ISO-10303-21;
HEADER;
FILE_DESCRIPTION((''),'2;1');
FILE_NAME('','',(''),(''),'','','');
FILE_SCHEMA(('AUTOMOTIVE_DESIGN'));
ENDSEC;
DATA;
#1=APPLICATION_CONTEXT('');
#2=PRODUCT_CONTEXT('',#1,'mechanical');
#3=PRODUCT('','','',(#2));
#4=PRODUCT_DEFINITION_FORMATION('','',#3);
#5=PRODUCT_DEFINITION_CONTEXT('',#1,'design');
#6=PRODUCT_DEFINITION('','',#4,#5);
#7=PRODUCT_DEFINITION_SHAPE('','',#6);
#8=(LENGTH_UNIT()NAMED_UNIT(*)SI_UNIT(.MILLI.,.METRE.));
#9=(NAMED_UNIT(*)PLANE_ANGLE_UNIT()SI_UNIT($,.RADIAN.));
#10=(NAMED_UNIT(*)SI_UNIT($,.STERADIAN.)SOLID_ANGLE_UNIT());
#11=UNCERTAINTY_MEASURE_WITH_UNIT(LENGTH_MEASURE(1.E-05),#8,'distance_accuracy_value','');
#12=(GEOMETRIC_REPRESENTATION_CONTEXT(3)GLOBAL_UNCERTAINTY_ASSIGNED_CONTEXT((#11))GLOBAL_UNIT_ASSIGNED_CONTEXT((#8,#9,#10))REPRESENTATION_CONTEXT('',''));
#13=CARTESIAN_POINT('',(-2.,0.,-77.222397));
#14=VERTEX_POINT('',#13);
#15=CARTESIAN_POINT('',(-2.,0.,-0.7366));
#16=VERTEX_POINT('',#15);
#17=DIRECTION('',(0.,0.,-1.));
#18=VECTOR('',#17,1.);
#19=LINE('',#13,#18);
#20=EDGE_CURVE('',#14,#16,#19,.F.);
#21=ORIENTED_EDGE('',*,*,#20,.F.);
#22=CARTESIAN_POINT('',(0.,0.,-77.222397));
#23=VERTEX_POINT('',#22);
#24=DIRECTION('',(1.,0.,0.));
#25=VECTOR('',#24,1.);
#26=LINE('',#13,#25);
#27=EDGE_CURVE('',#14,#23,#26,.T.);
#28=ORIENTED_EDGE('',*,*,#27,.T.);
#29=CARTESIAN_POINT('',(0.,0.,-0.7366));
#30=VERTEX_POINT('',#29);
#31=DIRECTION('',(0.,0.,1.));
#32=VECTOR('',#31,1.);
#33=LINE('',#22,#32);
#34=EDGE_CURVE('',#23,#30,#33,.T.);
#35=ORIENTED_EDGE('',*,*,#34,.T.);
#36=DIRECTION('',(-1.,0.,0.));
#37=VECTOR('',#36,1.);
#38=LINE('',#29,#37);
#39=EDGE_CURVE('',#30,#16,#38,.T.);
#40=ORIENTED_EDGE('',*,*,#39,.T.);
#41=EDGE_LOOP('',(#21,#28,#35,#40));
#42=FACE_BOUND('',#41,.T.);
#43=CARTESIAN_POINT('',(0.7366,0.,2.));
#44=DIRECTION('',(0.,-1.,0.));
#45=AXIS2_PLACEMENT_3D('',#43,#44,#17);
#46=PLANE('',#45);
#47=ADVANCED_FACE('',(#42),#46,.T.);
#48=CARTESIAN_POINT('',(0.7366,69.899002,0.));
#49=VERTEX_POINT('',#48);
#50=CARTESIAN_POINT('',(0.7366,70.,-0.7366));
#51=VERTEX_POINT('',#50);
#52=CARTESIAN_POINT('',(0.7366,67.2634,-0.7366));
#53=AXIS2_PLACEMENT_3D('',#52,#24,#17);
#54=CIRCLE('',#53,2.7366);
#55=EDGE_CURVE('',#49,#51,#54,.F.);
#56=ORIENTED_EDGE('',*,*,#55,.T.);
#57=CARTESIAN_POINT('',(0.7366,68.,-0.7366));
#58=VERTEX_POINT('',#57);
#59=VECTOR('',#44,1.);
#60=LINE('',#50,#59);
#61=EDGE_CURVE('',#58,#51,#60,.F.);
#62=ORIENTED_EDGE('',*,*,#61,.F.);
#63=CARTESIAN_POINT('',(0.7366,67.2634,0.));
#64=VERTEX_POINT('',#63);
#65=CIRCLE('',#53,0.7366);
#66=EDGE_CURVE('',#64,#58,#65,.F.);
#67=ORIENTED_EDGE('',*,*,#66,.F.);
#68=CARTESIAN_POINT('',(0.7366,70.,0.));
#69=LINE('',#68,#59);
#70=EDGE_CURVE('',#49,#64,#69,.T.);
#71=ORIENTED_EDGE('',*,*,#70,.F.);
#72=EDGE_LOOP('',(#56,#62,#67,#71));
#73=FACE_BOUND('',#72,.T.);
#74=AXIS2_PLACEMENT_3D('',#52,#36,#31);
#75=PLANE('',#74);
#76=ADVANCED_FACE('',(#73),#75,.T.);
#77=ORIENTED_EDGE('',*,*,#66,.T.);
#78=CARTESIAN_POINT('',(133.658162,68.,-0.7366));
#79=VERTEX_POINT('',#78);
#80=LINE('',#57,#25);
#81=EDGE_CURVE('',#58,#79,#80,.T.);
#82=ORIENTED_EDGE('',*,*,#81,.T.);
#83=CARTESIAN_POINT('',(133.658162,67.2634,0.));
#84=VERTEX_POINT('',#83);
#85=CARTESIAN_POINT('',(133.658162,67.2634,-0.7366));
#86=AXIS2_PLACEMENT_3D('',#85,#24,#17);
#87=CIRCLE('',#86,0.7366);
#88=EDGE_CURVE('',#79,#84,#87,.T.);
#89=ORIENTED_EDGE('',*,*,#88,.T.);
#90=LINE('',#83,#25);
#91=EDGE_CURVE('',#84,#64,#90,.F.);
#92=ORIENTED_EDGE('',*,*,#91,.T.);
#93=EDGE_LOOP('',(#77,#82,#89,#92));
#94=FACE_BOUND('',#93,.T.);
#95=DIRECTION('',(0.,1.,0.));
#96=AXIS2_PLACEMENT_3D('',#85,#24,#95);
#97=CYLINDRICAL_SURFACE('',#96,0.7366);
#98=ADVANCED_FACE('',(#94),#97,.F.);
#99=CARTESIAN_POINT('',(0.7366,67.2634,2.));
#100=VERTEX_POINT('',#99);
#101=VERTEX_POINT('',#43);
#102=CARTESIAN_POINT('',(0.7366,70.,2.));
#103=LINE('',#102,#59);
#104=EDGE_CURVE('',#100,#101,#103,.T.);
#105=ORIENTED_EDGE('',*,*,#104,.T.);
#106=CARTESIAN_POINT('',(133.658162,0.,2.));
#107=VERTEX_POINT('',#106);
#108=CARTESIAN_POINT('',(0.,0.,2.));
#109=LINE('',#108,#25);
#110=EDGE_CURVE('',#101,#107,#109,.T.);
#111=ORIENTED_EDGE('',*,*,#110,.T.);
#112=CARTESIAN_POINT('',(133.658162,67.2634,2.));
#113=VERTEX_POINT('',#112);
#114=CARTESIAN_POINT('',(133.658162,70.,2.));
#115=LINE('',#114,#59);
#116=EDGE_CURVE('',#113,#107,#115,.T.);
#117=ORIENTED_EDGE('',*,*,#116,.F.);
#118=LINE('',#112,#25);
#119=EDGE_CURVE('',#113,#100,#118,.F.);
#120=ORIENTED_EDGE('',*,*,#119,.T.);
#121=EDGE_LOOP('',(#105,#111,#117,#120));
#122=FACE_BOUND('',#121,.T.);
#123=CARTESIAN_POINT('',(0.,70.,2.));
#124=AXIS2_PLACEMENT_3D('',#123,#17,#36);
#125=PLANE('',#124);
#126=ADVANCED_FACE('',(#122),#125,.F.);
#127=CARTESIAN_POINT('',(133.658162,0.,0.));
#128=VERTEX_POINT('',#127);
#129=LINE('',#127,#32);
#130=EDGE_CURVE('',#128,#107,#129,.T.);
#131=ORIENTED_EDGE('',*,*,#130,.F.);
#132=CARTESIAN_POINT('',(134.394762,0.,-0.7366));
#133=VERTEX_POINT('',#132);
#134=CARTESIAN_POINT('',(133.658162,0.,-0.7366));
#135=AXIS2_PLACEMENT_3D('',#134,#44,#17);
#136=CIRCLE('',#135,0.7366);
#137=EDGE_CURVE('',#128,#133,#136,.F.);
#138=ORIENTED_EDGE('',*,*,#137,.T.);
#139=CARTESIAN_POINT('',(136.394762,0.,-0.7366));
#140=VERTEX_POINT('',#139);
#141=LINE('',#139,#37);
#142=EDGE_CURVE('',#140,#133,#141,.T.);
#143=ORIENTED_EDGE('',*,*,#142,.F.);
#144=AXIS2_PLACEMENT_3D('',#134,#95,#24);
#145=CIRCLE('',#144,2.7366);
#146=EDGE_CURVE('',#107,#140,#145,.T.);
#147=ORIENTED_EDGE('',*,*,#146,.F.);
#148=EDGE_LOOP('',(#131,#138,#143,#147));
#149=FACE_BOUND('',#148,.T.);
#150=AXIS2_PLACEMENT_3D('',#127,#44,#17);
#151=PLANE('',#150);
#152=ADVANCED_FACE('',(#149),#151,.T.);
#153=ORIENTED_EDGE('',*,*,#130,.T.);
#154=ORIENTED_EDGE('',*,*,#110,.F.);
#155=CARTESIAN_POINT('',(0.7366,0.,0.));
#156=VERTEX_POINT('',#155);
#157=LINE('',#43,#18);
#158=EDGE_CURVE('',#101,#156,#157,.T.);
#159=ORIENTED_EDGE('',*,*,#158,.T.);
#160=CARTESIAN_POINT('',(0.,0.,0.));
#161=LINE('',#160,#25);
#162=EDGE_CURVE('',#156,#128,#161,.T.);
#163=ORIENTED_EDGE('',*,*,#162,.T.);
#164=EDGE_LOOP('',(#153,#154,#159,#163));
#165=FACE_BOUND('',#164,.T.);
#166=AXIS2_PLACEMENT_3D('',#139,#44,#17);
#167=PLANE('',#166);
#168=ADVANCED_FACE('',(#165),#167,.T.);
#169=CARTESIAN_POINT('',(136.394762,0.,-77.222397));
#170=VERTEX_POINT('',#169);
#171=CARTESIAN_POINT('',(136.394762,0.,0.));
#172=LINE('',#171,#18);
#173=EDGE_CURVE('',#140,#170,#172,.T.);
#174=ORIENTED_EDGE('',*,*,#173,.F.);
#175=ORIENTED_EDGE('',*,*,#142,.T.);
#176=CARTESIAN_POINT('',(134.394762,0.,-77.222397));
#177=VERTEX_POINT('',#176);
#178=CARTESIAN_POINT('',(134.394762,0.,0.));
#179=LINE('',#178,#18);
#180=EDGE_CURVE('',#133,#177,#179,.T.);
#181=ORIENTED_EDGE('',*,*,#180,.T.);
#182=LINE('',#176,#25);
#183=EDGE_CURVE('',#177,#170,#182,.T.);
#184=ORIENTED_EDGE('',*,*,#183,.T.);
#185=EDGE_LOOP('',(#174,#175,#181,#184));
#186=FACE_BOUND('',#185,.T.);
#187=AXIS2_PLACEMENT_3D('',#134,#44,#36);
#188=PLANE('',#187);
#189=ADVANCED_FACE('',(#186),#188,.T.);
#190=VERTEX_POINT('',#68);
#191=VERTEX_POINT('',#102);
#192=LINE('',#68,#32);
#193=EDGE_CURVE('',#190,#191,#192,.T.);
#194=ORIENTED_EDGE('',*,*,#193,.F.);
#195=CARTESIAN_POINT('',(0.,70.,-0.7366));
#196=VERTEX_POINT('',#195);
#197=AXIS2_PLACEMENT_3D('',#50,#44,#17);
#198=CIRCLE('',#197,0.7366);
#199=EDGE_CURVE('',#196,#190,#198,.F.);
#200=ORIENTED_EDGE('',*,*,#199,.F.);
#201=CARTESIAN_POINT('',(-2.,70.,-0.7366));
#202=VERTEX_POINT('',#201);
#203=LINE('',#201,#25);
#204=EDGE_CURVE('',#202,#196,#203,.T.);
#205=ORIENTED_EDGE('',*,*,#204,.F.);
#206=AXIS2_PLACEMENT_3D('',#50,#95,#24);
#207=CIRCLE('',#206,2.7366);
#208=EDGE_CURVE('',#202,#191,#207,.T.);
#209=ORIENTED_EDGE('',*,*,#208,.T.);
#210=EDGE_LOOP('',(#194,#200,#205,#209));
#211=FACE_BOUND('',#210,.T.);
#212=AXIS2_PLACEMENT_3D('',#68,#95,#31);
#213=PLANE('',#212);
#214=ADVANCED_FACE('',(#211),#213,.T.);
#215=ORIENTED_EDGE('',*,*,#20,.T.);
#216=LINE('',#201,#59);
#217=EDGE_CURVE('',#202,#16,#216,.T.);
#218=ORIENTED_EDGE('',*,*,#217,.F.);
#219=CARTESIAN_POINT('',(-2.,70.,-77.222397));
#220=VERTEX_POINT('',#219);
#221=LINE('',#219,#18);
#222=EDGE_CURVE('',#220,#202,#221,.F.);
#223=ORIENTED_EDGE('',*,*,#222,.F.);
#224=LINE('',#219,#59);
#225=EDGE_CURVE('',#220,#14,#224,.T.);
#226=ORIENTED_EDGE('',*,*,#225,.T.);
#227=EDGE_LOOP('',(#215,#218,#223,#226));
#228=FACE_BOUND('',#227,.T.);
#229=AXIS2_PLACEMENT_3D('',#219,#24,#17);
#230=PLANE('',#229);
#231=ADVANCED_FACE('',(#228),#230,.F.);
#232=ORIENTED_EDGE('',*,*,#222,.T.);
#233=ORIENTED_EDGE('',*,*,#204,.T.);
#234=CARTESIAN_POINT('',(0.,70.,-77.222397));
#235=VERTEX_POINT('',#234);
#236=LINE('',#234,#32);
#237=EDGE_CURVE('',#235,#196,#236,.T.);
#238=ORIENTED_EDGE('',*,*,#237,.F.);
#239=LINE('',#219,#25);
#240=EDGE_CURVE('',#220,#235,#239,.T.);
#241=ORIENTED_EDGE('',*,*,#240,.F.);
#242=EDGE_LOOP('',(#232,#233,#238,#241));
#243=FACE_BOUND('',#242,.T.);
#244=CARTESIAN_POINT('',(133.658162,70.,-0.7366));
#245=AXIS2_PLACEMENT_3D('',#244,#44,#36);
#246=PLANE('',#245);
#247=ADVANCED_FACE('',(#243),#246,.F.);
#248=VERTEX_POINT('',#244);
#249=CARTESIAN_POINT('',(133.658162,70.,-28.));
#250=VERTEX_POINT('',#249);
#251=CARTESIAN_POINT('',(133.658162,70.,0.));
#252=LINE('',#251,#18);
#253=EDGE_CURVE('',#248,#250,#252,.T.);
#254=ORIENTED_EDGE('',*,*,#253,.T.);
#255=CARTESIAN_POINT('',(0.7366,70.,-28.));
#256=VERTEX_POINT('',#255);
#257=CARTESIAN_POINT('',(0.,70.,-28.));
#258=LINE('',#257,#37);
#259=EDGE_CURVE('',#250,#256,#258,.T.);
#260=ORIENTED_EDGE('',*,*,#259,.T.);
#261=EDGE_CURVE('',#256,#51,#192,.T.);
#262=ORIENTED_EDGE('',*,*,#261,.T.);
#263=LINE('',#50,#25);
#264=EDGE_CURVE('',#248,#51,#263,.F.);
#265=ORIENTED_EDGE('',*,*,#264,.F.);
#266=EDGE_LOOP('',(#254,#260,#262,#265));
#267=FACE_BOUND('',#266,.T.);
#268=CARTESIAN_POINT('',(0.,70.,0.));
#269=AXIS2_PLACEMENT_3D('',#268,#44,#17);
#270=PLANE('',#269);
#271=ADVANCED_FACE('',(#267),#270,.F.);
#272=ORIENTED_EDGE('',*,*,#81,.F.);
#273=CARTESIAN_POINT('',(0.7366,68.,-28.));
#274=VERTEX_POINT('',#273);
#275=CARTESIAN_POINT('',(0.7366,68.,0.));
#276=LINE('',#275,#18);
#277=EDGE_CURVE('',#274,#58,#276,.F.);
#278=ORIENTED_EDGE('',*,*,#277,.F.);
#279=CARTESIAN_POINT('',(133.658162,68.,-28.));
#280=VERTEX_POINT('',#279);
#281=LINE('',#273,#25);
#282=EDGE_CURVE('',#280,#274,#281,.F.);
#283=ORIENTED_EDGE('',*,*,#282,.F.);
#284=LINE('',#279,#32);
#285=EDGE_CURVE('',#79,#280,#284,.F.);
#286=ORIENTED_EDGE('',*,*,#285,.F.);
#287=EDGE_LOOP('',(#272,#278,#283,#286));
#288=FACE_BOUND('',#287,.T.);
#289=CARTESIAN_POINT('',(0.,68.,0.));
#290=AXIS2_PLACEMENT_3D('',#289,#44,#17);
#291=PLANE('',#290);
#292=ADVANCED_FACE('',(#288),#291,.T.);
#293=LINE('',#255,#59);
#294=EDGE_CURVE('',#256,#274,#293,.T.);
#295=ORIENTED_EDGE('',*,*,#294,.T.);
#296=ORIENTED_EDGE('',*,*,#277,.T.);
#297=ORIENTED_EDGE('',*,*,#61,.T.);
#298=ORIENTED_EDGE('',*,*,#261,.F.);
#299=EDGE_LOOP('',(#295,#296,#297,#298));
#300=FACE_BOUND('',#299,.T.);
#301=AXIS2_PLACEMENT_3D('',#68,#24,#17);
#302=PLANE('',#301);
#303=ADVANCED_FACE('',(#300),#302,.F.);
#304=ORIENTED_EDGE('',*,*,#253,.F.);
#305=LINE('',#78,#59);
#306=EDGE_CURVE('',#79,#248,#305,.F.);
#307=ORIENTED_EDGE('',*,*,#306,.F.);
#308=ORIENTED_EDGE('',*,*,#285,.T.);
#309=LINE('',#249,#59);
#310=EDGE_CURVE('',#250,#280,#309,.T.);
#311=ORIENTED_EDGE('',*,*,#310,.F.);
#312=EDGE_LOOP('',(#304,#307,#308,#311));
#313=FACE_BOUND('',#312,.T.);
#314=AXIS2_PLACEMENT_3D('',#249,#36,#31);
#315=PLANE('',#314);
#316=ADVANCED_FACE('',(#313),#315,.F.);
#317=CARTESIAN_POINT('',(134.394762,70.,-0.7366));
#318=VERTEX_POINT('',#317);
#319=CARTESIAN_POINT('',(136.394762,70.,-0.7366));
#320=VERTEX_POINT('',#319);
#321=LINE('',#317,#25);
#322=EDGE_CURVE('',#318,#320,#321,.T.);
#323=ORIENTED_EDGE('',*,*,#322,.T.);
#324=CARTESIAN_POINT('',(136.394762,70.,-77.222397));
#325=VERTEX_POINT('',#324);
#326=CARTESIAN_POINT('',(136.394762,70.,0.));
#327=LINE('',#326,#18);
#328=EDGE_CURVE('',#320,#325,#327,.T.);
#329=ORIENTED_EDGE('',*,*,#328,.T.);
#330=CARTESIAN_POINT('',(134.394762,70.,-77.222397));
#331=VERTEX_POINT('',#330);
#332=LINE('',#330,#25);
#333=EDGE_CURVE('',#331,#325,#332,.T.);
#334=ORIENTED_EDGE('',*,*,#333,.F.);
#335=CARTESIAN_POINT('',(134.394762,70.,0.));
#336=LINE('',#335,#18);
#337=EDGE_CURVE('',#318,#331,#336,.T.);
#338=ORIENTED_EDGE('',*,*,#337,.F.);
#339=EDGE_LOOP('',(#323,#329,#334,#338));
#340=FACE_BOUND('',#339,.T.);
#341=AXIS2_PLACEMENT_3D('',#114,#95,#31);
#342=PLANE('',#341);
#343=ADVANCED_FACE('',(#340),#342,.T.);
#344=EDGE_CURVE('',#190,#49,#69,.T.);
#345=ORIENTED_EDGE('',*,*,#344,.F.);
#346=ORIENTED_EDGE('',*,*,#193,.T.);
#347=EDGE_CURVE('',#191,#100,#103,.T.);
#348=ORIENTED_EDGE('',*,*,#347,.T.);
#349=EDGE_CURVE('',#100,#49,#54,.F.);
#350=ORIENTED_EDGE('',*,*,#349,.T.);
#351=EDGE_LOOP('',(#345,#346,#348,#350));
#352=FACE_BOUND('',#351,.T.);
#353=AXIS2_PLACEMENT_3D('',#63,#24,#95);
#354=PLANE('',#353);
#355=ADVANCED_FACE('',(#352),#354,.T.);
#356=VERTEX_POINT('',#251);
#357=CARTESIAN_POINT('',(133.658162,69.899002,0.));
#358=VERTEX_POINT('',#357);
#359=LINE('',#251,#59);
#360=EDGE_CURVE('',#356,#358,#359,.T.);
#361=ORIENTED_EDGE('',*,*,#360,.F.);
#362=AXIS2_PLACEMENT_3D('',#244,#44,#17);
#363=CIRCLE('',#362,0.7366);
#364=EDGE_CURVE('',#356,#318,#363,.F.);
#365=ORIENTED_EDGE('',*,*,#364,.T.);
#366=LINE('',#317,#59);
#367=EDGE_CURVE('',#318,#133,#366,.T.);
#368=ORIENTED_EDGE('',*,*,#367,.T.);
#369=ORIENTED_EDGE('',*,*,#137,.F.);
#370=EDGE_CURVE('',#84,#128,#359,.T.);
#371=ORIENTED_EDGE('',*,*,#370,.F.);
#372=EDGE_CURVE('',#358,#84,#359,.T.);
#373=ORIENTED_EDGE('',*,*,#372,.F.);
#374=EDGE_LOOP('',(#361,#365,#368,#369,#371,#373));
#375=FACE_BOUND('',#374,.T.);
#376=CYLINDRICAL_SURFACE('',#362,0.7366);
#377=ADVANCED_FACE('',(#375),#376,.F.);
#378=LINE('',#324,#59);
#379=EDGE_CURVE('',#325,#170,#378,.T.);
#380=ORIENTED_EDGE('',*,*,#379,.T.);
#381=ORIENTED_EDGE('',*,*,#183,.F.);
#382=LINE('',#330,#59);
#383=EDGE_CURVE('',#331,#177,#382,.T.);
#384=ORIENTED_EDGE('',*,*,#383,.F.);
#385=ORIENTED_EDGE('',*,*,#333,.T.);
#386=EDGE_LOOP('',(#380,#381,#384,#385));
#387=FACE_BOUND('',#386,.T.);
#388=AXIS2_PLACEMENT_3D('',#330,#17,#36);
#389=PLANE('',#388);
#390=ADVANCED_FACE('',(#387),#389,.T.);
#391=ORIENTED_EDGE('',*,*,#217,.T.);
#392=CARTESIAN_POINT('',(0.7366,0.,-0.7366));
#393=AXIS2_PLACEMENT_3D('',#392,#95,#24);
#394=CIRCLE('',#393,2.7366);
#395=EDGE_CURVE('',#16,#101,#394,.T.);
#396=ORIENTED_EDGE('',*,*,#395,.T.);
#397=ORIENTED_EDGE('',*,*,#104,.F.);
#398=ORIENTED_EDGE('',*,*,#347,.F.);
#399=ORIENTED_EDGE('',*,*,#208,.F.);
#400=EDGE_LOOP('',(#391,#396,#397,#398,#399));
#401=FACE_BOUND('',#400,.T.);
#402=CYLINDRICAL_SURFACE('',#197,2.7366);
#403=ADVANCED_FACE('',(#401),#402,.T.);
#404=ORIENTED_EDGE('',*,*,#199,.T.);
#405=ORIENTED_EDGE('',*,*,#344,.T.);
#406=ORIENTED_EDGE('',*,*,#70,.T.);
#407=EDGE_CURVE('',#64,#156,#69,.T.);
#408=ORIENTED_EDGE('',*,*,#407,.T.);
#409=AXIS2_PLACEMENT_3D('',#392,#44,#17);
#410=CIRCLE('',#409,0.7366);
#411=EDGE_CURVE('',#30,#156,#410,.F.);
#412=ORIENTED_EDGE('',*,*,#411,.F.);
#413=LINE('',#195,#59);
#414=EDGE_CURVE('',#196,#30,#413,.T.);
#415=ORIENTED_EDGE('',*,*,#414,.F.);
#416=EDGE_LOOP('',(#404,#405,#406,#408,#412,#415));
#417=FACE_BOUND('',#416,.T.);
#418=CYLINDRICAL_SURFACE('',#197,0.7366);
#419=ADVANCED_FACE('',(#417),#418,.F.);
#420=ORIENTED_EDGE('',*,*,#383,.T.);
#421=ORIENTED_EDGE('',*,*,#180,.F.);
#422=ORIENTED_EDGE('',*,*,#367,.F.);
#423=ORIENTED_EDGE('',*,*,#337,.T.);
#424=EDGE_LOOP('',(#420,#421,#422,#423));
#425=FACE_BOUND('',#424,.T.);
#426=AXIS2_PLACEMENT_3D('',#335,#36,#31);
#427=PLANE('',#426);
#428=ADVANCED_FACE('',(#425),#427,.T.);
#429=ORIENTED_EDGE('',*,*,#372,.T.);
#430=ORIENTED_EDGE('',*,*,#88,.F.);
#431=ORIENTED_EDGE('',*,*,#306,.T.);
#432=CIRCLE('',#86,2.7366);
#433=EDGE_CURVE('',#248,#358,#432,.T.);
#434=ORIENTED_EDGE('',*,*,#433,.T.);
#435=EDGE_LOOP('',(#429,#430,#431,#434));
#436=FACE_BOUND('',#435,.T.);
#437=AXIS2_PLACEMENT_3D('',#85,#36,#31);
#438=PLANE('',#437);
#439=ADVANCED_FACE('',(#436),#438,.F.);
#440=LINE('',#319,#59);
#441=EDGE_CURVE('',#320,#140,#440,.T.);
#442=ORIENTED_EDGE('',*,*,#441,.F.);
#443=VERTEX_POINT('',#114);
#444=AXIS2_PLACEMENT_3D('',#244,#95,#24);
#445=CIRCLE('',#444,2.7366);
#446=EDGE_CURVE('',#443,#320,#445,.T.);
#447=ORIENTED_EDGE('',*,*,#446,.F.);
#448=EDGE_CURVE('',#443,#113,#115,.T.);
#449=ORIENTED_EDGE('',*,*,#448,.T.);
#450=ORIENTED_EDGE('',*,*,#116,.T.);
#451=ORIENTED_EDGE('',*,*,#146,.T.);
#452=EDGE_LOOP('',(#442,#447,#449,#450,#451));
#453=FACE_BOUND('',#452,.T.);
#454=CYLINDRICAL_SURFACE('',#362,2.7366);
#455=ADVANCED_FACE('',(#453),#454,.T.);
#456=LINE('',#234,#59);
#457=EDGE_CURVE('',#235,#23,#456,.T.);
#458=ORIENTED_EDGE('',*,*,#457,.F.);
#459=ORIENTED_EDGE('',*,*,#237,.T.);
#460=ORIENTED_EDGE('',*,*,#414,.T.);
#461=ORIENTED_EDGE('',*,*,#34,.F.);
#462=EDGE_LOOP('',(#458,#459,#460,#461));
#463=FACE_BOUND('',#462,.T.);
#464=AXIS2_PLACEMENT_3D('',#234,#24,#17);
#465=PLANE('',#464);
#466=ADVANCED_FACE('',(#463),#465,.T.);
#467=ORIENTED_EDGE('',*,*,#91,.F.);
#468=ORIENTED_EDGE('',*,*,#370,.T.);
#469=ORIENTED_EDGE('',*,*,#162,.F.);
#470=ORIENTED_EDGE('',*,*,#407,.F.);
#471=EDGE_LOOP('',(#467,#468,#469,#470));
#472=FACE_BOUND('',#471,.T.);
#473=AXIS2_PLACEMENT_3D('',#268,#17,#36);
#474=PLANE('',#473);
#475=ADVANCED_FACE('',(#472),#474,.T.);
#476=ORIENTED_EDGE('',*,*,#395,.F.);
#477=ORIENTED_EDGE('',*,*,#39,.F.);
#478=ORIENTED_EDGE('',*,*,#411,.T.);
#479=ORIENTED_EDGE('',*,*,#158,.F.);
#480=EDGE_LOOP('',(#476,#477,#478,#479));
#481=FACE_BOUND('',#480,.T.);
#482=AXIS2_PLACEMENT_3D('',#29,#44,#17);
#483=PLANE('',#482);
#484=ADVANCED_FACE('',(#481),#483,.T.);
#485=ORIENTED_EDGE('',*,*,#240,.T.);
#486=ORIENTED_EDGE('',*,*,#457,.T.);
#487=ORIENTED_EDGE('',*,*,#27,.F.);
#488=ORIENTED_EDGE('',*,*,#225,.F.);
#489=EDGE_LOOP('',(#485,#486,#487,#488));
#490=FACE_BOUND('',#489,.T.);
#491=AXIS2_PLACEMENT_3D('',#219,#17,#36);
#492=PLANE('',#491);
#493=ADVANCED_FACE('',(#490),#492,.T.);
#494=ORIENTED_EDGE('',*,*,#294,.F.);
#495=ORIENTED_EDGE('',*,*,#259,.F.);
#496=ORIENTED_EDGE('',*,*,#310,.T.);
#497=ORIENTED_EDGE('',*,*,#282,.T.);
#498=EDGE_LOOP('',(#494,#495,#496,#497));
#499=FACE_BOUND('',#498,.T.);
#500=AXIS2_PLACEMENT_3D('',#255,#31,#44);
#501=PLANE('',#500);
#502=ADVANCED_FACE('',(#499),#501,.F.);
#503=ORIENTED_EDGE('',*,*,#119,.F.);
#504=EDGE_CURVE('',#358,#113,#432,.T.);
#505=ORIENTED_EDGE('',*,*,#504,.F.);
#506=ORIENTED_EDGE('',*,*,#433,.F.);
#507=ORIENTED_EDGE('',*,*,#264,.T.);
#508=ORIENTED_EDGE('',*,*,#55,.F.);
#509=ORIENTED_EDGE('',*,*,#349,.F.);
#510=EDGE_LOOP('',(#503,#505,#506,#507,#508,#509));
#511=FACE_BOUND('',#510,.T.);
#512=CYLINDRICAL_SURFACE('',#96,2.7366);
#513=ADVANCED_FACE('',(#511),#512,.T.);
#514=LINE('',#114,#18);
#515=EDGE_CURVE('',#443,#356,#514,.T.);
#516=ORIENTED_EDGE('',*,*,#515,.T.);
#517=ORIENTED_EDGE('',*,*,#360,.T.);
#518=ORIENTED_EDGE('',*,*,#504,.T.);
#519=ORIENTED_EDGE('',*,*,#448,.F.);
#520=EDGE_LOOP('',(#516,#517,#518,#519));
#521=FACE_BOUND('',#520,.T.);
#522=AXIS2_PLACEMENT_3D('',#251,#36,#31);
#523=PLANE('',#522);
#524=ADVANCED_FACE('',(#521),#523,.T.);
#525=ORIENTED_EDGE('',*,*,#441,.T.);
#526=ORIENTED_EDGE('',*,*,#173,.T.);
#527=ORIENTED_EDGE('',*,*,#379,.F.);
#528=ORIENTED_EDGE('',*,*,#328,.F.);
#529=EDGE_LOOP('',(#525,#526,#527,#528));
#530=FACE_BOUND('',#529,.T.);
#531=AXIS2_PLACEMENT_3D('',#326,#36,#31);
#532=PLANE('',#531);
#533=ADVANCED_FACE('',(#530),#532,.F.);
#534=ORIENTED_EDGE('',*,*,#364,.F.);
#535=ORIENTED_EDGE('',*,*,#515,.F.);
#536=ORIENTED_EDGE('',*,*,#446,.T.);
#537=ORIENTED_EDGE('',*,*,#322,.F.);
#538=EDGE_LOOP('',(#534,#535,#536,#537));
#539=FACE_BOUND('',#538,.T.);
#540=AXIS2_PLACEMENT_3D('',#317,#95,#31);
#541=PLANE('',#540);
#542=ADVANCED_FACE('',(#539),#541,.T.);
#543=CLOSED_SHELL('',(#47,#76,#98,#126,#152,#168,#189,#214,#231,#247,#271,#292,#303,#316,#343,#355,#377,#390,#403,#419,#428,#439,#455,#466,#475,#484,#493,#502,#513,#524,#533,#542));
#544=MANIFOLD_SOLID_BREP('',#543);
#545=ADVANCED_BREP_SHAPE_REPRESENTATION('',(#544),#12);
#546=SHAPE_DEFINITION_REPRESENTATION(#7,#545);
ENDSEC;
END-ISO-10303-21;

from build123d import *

# Parameters (mm, degrees)
BASE_FLANGE1_DEPTH           = 70
EDGE_FLANGE1_STRIP_W         = 9.4732
EDGE_FLANGE1_STRIP_H         = 2
EDGE_FLANGE1_STRIP_CUT_DEPTH = 132.921562236
EDGE_FLANGE1_DEPTH           = 132.921562236


# Sheet-metal steps are written as plain solids
with BuildPart() as part:
    # Sketch1 → Base-Flange1 (new body)
    with BuildSketch(Plane(origin=(0, 0, 0), x_dir=(1, 0, 0), z_dir=(0, 1, 0))):
        with BuildLine():
            Line((0, 77.222396617), (0, 0.7366))
            ThreePointArc((0, 0.7366), (0.215745145, 0.215745145), (0.7366, 0))
            Line((0.7366, 0), (133.658162236, 0))
            ThreePointArc((133.658162236, 0), (134.179017091, 0.215745145), (134.394762236, 0.7366))
            Line((134.394762236, 0.7366), (134.394762236, 77.222396617))
            Line((134.394762236, 77.222396617), (136.394762236, 77.222396617))
            Line((136.394762236, 77.222396617), (136.394762236, 0.7366))
            ThreePointArc((136.394762236, 0.7366), (135.593230653, -1.198468417), (133.658162236, -2))
            Line((133.658162236, -2), (0.7366, -2))
            ThreePointArc((0.7366, -2), (-1.198468417, -1.198468417), (-2, 0.7366))
            Line((-2, 0.7366), (-2, 77.222396617))
            Line((-2, 77.222396617), (0, 77.222396617))
        make_face()
    extrude(amount=BASE_FLANGE1_DEPTH)

    # Edge-Flange1 strip (across the edge) → Edge-Flange1 strip cut (cut)
    with BuildSketch(Plane(origin=(0.7366, 70, 0), x_dir=(0, -1, 0), z_dir=(1, 0, 0))):
        with Locations((-2, -1)):
            Rectangle(EDGE_FLANGE1_STRIP_W, EDGE_FLANGE1_STRIP_H)
    extrude(amount=EDGE_FLANGE1_STRIP_CUT_DEPTH, mode=Mode.SUBTRACT)

    # Edge-Flange1 section (across the edge) → Edge-Flange1 (add)
    with BuildSketch(Plane(origin=(0.7366, 70, 0), x_dir=(0, -1, 0), z_dir=(1, 0, 0))):
        with BuildLine():
            Line((0, 0.7366), (0, 28))
            Line((0, 28), (2, 28))
            Line((2, 28), (2, 0.7366))
            ThreePointArc((2, 0.7366), (2.215745145, 0.215745145), (2.7366, 0))
            Line((2.7366, 0), (2.7366, -2))
            ThreePointArc((2.7366, -2), (0.801531583, -1.198468417), (0, 0.7366))
        make_face()
    extrude(amount=EDGE_FLANGE1_DEPTH)


solid = part.part
